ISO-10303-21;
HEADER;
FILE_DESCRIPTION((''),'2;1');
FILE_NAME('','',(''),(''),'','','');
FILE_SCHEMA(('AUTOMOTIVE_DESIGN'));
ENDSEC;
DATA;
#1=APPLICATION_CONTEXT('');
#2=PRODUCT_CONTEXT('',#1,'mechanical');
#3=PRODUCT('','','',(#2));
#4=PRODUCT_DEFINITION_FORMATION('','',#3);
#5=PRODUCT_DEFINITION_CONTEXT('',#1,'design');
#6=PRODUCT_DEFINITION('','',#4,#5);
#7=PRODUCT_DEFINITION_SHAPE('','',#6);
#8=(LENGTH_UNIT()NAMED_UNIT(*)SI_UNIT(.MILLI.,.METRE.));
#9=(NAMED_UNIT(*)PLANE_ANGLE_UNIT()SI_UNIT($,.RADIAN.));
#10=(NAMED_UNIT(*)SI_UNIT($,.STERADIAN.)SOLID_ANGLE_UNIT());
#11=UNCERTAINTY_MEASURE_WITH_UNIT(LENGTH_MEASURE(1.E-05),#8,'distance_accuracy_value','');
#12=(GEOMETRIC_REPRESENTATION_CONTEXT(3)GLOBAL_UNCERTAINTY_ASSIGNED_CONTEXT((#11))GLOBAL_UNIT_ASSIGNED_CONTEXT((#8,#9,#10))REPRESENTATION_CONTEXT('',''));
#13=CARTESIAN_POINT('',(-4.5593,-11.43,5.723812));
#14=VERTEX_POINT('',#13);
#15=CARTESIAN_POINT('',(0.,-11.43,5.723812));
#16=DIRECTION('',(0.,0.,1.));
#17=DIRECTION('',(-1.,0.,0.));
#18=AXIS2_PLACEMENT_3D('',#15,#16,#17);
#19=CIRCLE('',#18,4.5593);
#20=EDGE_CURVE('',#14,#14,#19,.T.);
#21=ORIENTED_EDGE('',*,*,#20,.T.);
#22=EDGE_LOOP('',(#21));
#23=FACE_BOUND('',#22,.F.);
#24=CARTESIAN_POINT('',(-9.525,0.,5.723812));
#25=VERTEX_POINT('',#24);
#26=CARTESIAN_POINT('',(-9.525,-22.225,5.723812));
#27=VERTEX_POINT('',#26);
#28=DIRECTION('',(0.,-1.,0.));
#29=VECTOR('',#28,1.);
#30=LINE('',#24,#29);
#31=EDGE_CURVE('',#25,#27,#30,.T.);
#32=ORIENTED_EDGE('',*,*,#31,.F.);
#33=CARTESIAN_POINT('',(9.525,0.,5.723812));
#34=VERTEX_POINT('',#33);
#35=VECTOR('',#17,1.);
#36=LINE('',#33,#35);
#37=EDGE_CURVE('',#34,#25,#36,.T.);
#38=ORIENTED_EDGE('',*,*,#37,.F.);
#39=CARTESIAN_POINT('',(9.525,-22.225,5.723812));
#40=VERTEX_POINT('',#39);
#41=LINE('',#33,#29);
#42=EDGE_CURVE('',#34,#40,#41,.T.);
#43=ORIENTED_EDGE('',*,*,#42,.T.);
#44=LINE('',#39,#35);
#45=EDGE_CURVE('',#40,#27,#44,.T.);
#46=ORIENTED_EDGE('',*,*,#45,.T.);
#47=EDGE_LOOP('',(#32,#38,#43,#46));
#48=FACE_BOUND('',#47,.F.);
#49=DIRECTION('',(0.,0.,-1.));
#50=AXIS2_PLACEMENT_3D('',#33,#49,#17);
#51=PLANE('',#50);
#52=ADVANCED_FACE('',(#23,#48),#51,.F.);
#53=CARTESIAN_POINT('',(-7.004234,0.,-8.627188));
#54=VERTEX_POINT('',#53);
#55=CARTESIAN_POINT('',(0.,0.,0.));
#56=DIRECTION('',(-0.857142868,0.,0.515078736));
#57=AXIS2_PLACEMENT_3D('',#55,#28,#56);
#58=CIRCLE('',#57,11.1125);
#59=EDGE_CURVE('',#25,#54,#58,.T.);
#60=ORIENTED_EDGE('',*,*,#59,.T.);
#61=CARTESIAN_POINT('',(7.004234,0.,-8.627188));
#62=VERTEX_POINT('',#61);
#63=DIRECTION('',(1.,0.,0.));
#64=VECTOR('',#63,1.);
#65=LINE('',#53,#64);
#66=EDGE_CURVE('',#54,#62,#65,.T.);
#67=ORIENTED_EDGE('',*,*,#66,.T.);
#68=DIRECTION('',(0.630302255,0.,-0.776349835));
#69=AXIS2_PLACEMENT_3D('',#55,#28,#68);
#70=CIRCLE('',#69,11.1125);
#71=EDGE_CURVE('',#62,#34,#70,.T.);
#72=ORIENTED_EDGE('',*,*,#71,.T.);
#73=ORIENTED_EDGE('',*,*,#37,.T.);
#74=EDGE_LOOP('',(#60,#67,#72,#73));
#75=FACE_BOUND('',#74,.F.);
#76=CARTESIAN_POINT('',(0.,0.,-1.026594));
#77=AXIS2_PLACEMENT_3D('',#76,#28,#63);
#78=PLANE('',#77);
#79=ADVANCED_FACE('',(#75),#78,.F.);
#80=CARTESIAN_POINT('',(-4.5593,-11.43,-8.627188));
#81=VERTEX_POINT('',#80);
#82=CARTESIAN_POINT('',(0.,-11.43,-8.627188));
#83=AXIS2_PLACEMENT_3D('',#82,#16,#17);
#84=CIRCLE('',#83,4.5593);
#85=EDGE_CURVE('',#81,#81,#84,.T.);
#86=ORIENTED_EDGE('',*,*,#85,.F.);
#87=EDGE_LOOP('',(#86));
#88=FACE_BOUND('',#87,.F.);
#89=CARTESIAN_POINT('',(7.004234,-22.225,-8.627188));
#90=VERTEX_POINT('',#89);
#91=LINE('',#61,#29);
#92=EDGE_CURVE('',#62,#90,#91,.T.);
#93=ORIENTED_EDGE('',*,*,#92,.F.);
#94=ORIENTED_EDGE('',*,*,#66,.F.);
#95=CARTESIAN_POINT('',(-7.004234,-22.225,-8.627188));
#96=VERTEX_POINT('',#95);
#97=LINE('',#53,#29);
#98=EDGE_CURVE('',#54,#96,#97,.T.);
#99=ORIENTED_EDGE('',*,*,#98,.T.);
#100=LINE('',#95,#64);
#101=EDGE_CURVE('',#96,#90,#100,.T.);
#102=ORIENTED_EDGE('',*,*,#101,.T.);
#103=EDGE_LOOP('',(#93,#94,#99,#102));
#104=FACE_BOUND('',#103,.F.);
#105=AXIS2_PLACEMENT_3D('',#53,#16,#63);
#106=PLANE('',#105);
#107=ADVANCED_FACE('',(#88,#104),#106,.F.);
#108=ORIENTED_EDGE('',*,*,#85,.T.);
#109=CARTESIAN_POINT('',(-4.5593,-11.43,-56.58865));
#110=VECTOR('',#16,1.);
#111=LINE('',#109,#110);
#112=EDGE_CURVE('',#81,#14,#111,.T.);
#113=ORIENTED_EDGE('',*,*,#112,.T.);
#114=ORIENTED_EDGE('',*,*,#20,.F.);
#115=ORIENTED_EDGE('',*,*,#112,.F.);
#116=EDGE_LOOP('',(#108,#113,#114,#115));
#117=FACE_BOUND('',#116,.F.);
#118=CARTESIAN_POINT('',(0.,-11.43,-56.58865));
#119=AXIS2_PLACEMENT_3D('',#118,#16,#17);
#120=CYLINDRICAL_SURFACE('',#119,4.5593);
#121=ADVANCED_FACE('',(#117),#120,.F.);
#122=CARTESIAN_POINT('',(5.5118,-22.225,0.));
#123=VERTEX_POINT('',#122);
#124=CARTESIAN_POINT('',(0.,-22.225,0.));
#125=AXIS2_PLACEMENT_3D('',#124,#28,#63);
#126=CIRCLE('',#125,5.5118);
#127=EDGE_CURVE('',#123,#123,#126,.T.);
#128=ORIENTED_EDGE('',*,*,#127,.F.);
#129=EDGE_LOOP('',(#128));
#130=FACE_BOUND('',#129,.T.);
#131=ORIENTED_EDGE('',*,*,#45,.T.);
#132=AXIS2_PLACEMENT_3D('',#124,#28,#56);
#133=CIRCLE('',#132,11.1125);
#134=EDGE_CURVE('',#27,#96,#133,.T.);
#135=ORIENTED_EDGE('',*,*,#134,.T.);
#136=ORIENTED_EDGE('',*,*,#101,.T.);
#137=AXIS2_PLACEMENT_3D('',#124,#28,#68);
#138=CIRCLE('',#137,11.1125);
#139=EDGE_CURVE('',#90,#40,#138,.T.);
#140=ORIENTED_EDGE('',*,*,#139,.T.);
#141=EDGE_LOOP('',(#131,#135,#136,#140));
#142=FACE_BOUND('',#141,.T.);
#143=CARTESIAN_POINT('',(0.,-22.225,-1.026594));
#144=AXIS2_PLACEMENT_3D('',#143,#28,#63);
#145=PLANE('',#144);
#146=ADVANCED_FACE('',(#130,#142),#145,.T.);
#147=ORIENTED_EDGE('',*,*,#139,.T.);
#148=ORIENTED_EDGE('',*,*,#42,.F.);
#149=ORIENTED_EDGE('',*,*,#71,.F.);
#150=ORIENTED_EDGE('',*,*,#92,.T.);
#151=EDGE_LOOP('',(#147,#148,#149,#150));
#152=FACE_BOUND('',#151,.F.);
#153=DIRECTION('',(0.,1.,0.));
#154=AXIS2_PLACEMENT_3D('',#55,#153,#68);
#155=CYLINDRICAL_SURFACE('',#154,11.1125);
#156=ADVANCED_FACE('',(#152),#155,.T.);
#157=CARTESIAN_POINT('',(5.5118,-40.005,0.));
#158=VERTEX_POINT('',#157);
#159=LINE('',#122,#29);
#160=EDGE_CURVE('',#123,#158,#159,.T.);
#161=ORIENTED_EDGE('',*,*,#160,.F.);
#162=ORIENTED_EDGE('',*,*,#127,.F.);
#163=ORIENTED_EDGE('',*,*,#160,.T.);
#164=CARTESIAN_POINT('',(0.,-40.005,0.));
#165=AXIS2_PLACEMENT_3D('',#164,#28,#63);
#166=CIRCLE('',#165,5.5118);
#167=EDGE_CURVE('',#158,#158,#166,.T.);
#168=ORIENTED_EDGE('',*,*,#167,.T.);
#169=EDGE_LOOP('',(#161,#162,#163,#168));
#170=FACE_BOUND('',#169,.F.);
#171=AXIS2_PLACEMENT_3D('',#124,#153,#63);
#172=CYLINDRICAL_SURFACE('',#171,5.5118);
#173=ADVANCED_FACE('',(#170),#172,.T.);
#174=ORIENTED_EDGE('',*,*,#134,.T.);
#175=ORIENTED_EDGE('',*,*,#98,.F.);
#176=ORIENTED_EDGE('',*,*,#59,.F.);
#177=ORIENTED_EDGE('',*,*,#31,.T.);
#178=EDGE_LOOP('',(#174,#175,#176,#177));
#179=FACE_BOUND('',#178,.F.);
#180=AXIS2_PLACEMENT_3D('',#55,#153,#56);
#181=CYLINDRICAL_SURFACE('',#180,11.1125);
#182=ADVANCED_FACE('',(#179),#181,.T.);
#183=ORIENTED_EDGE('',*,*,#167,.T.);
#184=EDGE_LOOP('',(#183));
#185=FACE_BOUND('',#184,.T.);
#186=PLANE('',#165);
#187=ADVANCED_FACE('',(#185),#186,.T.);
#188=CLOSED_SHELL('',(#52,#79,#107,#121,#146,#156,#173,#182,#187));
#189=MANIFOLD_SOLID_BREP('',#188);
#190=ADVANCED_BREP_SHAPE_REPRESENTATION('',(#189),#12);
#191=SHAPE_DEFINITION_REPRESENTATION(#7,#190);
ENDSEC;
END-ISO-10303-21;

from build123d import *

# Parameters (mm, degrees)
F1_DEPTH = 22.225
F2_R     = 5.5118
F3_DEPTH = 17.78
F5_D     = 9.1186


# Not quite as in the source:
# - ends of sketch curves that miss each other by under 0.0002 mm in the source are joined


with BuildPart() as f1:
    # F0 (on Front) → F1 (new body)
    with BuildSketch(Plane.XZ):
        with BuildLine():
            ThreePointArc((7.0042338121, -8.6271875461), (10.9449391879, -1.9224886016), (9.5250001177, 5.7238124539))
            Line((9.5250001177, 5.7238124539), (-9.5250001177, 5.7238124539))
            ThreePointArc((-9.5250001177, 5.7238124539), (-10.9449391879, -1.9224886016), (-7.0042338121, -8.6271875461))
            Line((-7.0042338121, -8.6271875461), (7.0042338121, -8.6271875461))
        make_face()
    extrude(amount=F1_DEPTH)

    # F2 (on face) → F3 (join)
    with BuildSketch(Plane.XZ.offset(22.225)):
        Circle(F2_R)
    extrude(amount=F3_DEPTH)

    # F5 (through all)
    with Locations(Plane(origin=(0, 0, -8.6271875461), x_dir=(1, 0, 0), z_dir=(0, 0, -1))):
        with Locations((0, 11.43)):
            Hole(F5_D / 2)


solid = f1.part
